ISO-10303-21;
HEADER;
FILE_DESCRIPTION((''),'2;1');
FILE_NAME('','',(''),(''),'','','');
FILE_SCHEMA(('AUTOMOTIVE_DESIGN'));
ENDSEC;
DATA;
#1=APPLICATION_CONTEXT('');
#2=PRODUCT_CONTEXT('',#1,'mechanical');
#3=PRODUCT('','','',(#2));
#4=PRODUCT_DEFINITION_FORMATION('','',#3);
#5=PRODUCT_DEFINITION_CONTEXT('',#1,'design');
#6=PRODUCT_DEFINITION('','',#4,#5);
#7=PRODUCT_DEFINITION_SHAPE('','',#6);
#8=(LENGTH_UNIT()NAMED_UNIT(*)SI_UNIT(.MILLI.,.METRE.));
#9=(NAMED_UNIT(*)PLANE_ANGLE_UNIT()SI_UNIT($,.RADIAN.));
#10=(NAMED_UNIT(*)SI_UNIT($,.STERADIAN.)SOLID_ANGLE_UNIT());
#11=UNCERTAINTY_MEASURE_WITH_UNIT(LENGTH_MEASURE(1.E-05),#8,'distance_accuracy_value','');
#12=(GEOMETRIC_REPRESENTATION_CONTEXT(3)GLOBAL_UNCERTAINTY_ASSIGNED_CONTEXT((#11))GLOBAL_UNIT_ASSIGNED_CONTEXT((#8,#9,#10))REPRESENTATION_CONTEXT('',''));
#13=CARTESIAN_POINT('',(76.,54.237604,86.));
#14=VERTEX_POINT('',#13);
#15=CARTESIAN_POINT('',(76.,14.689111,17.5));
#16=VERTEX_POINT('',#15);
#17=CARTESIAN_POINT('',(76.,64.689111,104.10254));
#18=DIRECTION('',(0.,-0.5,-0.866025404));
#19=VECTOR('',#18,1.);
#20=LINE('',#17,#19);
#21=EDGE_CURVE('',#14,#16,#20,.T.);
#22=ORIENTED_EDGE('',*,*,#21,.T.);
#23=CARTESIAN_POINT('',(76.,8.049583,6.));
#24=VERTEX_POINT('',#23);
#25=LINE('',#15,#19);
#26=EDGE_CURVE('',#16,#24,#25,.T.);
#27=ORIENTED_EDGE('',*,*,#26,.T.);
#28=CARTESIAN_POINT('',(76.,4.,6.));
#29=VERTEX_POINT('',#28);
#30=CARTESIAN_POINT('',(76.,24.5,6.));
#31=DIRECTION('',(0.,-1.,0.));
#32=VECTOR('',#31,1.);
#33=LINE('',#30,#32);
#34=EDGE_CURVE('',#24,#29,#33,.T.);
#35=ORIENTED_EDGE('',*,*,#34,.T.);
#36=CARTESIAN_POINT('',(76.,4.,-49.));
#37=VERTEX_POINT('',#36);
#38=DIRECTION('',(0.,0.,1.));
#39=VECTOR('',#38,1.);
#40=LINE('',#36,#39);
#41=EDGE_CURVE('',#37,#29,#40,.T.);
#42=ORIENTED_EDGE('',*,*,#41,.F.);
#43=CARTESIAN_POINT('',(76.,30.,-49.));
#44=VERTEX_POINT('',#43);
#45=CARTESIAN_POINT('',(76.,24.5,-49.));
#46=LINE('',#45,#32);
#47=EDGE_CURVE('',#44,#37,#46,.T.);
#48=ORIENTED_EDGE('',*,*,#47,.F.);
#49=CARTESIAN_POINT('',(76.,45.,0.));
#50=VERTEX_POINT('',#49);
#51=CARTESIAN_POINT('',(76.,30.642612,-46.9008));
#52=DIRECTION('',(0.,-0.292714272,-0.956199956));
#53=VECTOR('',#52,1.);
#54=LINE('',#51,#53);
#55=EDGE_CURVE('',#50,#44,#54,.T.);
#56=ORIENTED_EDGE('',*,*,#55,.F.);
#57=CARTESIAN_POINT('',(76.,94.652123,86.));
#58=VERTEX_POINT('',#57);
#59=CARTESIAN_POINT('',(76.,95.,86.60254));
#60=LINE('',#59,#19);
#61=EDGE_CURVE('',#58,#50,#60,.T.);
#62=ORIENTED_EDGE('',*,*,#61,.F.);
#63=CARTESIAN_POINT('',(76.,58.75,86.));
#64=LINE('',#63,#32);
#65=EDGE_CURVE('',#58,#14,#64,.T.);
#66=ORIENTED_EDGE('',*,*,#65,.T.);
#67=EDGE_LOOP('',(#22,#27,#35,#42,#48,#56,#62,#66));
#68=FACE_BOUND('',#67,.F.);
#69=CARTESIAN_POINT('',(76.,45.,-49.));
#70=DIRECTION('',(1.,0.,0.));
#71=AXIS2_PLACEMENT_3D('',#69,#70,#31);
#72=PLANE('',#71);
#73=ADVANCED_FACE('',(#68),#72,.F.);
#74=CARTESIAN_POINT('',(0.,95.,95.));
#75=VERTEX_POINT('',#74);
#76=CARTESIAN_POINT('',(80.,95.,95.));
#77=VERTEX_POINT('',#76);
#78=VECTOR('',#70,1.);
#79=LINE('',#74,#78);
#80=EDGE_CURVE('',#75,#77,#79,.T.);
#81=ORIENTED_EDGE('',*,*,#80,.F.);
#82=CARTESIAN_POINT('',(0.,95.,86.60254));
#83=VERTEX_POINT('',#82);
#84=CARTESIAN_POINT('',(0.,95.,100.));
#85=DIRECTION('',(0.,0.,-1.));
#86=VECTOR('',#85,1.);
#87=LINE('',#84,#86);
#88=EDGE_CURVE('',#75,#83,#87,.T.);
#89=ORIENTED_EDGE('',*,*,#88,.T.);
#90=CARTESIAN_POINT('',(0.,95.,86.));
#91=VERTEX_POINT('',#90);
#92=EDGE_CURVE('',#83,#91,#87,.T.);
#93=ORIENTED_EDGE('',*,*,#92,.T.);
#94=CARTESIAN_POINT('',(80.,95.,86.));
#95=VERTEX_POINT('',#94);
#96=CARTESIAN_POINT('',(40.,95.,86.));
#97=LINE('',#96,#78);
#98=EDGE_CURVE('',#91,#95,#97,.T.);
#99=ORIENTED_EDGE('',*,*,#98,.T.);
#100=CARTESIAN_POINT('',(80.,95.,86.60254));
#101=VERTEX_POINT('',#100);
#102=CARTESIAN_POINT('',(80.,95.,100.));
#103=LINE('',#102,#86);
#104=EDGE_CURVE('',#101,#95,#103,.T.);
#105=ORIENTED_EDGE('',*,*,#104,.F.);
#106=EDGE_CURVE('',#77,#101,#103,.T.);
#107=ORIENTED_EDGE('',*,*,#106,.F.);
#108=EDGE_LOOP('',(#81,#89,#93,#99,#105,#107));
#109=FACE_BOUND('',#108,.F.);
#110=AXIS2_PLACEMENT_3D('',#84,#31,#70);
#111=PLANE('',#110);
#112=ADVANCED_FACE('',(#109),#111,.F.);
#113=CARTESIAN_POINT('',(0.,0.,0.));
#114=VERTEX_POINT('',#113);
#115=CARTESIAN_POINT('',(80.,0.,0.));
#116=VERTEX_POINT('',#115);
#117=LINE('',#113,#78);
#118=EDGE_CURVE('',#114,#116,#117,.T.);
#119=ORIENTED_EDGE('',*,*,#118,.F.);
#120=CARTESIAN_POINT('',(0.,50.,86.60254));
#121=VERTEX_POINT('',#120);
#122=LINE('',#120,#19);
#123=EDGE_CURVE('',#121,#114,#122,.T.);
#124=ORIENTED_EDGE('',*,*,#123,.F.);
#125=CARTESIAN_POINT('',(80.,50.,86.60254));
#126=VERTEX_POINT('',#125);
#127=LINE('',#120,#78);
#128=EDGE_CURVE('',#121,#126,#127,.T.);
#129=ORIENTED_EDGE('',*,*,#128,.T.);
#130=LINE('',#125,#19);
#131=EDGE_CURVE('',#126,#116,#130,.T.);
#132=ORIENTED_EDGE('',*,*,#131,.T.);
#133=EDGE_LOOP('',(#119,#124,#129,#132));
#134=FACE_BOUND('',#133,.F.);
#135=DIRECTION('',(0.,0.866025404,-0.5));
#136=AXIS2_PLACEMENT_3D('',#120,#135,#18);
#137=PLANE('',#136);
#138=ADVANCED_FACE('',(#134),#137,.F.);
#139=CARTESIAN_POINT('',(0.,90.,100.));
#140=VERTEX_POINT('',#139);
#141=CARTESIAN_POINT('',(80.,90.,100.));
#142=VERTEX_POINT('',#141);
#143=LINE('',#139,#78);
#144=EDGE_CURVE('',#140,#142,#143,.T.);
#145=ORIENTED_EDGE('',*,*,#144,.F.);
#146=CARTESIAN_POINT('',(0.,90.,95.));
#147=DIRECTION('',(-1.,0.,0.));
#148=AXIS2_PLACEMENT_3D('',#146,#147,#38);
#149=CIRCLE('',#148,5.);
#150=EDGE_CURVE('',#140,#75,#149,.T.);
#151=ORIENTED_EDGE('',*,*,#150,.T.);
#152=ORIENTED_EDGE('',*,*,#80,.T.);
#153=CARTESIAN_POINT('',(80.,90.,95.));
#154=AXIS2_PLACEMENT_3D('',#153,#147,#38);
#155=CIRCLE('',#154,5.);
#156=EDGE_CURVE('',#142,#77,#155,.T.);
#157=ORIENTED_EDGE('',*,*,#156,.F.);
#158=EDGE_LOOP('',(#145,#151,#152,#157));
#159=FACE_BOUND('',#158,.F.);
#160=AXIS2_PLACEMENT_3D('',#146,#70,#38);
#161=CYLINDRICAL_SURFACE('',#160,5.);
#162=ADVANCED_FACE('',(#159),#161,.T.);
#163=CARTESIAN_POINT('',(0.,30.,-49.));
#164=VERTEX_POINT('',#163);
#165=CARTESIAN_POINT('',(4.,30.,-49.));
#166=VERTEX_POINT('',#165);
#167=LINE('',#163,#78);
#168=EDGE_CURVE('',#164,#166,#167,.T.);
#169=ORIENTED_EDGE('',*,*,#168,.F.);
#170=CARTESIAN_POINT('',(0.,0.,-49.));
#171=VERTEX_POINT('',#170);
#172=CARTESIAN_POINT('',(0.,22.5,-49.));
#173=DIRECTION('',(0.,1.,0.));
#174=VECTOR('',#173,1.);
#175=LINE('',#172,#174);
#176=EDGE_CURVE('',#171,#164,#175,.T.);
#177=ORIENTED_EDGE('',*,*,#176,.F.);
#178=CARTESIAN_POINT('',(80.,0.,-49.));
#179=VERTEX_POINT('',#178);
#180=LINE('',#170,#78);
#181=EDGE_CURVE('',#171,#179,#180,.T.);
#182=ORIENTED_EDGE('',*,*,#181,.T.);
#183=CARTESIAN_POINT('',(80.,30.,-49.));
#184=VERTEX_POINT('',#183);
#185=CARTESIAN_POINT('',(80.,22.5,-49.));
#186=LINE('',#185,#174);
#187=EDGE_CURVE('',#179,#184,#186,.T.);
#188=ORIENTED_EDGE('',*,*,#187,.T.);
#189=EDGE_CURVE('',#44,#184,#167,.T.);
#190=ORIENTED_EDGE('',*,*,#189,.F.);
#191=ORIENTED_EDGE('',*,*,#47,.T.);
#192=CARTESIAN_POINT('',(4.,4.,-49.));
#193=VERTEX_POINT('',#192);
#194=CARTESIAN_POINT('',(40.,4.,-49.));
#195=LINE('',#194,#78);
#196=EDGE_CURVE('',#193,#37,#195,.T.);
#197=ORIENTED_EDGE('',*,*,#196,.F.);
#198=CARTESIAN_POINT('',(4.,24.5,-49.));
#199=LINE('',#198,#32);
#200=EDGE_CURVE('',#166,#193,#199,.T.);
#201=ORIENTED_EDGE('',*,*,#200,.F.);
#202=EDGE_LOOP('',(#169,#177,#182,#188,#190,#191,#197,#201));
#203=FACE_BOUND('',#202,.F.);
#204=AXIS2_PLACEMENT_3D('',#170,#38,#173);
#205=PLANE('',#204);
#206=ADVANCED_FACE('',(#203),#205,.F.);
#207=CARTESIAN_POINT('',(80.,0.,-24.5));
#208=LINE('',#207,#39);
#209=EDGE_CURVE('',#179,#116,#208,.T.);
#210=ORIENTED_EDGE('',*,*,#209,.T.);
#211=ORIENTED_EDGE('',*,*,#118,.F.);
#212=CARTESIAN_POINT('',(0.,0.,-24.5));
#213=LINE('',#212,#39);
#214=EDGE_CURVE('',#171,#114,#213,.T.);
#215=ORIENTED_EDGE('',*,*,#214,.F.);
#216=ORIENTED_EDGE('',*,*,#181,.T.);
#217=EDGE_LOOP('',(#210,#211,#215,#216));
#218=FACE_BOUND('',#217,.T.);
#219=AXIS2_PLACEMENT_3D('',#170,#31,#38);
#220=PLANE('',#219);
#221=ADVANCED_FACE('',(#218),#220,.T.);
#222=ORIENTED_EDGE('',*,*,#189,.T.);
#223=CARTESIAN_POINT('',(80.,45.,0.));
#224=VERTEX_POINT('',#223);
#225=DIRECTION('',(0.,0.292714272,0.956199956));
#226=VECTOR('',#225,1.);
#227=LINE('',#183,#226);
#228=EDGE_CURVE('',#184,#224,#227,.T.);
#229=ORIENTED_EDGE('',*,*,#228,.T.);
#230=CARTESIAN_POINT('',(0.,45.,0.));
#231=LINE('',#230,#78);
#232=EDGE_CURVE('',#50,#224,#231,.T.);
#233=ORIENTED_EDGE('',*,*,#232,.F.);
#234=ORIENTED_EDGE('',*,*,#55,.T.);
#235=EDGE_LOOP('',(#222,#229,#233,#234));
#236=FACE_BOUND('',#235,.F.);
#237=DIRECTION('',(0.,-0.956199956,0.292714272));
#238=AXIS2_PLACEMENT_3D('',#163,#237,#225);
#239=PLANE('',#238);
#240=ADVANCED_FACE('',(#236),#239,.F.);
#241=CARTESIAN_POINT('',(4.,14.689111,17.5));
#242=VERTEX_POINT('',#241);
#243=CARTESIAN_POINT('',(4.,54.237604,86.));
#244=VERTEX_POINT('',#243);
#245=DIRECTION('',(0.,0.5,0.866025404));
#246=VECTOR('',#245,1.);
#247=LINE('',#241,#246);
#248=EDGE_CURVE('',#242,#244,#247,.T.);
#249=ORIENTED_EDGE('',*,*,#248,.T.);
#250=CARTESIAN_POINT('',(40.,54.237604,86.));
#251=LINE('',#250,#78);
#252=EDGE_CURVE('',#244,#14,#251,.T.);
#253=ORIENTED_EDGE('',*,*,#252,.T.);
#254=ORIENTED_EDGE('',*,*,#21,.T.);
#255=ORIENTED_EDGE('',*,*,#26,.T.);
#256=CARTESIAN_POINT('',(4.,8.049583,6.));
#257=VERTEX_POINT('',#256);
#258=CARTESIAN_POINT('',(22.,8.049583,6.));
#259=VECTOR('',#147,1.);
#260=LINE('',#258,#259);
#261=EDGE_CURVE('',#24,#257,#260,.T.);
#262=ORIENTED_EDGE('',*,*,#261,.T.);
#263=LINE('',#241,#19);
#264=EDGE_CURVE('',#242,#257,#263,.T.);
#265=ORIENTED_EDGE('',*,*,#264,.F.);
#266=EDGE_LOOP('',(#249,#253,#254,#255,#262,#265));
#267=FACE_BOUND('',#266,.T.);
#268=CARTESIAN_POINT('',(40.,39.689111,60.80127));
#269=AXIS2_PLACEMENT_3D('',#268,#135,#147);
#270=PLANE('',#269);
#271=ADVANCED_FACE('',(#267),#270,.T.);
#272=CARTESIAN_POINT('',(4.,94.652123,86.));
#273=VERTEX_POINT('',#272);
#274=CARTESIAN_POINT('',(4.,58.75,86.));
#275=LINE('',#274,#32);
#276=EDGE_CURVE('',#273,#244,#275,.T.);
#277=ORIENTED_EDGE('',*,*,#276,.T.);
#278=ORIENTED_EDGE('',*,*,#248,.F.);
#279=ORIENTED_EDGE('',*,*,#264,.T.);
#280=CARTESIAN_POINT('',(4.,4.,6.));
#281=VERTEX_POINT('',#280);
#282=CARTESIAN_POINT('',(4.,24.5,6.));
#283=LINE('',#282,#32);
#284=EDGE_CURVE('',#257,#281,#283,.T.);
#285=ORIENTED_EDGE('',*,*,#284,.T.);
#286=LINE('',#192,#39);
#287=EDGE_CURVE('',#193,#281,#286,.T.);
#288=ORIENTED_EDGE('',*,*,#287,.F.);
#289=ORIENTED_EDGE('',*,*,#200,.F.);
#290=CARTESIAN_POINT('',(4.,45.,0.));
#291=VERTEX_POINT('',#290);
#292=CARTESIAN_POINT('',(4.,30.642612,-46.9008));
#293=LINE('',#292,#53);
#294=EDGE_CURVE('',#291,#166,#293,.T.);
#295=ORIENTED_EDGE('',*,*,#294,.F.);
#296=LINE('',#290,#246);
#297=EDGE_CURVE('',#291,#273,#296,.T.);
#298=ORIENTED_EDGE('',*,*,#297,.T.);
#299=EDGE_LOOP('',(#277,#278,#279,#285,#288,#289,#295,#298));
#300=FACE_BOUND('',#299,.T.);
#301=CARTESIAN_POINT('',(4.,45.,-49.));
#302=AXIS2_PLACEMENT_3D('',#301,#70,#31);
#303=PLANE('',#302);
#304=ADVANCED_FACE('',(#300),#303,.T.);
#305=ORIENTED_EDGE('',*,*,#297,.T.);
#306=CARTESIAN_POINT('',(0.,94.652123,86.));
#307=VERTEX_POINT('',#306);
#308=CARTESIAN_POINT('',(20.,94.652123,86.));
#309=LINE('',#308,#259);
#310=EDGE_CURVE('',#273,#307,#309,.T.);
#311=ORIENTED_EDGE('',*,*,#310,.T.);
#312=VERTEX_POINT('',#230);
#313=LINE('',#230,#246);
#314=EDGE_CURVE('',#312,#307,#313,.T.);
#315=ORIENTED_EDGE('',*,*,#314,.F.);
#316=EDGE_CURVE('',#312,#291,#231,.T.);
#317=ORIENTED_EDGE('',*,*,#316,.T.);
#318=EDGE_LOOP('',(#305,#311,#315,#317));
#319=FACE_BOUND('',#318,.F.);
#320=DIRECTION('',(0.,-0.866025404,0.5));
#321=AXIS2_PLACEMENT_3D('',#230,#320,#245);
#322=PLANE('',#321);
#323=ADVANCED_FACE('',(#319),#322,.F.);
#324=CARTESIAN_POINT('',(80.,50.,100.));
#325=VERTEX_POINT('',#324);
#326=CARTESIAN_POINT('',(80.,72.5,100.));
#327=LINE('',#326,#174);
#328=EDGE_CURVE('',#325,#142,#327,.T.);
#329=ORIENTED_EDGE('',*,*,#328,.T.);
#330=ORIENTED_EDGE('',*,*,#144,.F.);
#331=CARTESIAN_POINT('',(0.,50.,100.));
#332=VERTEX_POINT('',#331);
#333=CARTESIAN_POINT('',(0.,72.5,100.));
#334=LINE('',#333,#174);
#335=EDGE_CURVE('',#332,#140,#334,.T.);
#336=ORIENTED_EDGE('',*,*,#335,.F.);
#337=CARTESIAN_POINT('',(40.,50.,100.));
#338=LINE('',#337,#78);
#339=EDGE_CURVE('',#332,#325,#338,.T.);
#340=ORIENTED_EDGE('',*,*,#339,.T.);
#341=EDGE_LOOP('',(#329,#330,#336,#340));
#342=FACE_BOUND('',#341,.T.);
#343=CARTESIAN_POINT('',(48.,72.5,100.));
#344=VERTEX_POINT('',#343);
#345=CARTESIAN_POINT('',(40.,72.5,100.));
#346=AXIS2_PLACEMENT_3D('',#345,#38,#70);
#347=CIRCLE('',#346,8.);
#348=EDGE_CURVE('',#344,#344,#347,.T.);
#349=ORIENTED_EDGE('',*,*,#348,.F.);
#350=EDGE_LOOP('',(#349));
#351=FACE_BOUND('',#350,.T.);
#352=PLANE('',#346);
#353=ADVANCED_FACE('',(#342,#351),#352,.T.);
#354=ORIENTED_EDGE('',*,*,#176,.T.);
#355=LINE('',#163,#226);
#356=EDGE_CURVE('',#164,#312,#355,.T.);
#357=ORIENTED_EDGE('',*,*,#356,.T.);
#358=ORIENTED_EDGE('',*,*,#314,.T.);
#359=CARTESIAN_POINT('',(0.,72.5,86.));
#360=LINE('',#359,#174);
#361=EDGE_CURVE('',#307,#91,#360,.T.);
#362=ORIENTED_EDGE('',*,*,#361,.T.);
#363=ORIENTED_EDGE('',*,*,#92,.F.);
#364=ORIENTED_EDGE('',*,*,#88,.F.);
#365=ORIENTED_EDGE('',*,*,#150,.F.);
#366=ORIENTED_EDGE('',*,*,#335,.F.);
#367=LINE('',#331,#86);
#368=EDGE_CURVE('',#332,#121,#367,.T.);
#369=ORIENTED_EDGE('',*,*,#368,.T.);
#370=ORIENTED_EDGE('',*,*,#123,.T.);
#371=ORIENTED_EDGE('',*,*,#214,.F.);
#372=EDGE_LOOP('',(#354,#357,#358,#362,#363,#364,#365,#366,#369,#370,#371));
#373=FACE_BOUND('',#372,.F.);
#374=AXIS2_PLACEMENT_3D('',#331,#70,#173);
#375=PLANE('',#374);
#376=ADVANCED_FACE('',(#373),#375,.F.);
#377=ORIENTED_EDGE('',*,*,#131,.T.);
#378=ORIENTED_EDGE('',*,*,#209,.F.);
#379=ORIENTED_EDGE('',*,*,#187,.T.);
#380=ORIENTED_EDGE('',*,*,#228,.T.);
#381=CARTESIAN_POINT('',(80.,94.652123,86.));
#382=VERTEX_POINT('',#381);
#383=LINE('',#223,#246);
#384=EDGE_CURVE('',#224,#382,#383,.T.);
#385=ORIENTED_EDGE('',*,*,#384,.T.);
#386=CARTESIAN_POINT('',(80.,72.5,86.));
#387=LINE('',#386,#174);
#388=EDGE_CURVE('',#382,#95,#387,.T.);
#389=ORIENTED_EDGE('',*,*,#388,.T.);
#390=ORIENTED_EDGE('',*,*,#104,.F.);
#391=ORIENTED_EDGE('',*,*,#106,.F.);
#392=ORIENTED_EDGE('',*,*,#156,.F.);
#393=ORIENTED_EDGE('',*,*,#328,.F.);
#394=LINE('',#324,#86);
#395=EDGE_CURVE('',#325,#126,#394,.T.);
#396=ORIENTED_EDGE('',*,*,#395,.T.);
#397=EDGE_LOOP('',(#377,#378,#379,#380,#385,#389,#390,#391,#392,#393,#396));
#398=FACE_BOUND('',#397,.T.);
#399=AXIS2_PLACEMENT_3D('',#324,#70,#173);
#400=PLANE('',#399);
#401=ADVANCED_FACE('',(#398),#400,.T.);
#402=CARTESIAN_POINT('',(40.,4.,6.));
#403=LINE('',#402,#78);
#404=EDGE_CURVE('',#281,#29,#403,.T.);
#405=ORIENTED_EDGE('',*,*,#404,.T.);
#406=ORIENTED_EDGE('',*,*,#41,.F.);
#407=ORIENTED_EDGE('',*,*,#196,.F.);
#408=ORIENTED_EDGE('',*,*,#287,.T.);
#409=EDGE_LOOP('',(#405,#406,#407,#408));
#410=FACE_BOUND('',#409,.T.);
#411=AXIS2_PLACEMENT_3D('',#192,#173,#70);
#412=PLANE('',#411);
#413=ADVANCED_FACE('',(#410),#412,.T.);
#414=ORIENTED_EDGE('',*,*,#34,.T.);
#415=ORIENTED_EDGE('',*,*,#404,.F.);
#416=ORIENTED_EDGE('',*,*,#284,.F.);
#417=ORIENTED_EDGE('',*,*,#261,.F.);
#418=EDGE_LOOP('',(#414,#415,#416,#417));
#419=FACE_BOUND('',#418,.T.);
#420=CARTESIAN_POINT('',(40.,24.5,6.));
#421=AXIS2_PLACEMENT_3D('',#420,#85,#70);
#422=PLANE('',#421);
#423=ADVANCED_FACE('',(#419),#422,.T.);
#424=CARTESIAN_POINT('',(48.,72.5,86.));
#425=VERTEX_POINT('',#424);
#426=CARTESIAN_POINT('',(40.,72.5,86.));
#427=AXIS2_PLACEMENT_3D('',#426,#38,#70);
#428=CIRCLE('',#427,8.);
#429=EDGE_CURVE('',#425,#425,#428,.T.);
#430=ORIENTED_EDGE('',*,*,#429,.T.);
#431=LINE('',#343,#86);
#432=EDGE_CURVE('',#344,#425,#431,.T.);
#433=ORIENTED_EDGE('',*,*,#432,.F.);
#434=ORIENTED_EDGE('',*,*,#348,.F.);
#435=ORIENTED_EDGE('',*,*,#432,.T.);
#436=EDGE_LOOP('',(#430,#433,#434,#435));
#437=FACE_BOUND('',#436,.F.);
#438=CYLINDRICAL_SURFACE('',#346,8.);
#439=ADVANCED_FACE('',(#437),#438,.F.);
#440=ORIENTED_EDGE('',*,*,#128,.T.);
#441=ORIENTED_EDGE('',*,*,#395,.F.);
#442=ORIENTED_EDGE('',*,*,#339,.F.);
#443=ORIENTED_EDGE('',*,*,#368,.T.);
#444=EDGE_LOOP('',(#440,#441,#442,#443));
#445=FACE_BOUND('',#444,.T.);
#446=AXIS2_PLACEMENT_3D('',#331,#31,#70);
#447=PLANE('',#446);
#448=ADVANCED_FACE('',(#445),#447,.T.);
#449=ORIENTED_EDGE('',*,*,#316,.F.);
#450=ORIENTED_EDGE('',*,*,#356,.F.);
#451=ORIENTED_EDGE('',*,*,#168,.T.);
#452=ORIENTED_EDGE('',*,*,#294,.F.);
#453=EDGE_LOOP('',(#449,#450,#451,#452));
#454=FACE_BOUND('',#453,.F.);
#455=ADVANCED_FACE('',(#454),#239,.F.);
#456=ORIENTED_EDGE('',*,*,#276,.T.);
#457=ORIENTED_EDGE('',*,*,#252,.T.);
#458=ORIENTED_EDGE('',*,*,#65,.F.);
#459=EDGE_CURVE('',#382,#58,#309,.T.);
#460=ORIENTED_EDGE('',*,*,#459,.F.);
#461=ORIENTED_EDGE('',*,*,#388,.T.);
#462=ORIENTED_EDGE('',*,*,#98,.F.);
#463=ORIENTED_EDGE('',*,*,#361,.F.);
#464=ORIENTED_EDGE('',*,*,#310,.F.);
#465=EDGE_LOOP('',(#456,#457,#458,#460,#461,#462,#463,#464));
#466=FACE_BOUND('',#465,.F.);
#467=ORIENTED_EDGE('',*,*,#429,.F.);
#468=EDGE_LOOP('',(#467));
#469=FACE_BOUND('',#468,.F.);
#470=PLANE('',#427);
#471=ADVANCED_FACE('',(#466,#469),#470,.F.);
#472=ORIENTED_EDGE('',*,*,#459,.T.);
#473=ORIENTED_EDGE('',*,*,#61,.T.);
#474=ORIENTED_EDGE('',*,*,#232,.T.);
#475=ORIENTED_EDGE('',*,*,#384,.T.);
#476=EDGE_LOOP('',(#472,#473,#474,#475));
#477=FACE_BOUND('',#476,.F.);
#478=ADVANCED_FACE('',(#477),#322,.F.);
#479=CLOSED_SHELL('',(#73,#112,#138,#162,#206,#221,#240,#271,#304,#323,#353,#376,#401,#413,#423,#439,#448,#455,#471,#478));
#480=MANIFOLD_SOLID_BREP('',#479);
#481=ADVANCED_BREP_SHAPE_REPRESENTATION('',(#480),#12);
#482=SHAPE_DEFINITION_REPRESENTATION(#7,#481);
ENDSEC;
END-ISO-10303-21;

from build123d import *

# Parameters (mm, degrees)
F0_W      = 45
F0_H      = 49
F1_DEPTH  = 80
F3_DEPTH  = 35
F4_W      = 72
F4_H      = 41
F5_DEPTH  = 55
F6_W      = 72
F6_H      = 23
F7_DEPTH  = 15
F9_W      = 80
F9_H      = 45
F9_R      = 8
F10_DEPTH = 14
F11_R     = 5
F13_DEPTH = 80


with BuildPart() as f1:
    # F0 (on Right) → F1 (new body)
    with BuildSketch(Plane.YZ):
        with Locations((22.5, -24.5)):
            Rectangle(F0_W, F0_H)
        Polygon((50, 86.6025403784), (0, 0), (45, 0), (95, 86.6025403784), align=None)
    extrude(amount=F1_DEPTH)

    # F2 (on face) → F3 (cut)
    with BuildSketch(Plane(origin=(0, 33.75, -19.4855715851), x_dir=(-1, 0, 0), z_dir=(0, 0.8660254038, -0.5))):
        Polygon((-76, 22.5), (-4, 22.5), (-4, 117.5), (-4, 122.5), (-76, 122.5), (-76, 117.5), align=None)
    extrude(amount=-F3_DEPTH, mode=Mode.SUBTRACT)

    # F4 (on face) → F5 (cut)
    with BuildSketch(Plane(origin=(0, 0, -49), x_dir=(1, 0, 0), z_dir=(0, 0, -1))):
        with Locations((40, -24.5)):
            Rectangle(F4_W, F4_H)
    extrude(amount=-F5_DEPTH, mode=Mode.SUBTRACT)

    # F6 (on face) → F7 (cut)
    with BuildSketch(Plane(origin=(0, 11.25, 19.4855715851), x_dir=(1, 0, 0), z_dir=(0, 0.5, 0.8660254038))):
        with Locations((40, 15.4711431703)):
            Rectangle(F6_W, F6_H)
    extrude(amount=-F7_DEPTH, mode=Mode.SUBTRACT)

    # F9 (on offset) → F10 (join)
    with BuildSketch(Plane.XY.offset(100)):
        with Locations((40, 72.5)):
            Rectangle(F9_W, F9_H)
        with Locations((40, 72.5)):
            Circle(F9_R, mode=Mode.SUBTRACT)
    extrude(amount=-F10_DEPTH)

    # F11
    f11_edges = [f1.edges().sort_by_distance(p)[0] for p in [
        (40, 95, 100),
    ]]
    fillet(f11_edges, radius=F11_R)

    # F12 (on face) → F13 (cut)
    with BuildSketch(Plane(origin=(0, 0, 0), x_dir=(0, -1, 0), z_dir=(-1, 0, 0))):
        Polygon((-30, -49), (-45, 0), (-45, -49), align=None)
    extrude(amount=-F13_DEPTH, mode=Mode.SUBTRACT)


solid = f1.part
